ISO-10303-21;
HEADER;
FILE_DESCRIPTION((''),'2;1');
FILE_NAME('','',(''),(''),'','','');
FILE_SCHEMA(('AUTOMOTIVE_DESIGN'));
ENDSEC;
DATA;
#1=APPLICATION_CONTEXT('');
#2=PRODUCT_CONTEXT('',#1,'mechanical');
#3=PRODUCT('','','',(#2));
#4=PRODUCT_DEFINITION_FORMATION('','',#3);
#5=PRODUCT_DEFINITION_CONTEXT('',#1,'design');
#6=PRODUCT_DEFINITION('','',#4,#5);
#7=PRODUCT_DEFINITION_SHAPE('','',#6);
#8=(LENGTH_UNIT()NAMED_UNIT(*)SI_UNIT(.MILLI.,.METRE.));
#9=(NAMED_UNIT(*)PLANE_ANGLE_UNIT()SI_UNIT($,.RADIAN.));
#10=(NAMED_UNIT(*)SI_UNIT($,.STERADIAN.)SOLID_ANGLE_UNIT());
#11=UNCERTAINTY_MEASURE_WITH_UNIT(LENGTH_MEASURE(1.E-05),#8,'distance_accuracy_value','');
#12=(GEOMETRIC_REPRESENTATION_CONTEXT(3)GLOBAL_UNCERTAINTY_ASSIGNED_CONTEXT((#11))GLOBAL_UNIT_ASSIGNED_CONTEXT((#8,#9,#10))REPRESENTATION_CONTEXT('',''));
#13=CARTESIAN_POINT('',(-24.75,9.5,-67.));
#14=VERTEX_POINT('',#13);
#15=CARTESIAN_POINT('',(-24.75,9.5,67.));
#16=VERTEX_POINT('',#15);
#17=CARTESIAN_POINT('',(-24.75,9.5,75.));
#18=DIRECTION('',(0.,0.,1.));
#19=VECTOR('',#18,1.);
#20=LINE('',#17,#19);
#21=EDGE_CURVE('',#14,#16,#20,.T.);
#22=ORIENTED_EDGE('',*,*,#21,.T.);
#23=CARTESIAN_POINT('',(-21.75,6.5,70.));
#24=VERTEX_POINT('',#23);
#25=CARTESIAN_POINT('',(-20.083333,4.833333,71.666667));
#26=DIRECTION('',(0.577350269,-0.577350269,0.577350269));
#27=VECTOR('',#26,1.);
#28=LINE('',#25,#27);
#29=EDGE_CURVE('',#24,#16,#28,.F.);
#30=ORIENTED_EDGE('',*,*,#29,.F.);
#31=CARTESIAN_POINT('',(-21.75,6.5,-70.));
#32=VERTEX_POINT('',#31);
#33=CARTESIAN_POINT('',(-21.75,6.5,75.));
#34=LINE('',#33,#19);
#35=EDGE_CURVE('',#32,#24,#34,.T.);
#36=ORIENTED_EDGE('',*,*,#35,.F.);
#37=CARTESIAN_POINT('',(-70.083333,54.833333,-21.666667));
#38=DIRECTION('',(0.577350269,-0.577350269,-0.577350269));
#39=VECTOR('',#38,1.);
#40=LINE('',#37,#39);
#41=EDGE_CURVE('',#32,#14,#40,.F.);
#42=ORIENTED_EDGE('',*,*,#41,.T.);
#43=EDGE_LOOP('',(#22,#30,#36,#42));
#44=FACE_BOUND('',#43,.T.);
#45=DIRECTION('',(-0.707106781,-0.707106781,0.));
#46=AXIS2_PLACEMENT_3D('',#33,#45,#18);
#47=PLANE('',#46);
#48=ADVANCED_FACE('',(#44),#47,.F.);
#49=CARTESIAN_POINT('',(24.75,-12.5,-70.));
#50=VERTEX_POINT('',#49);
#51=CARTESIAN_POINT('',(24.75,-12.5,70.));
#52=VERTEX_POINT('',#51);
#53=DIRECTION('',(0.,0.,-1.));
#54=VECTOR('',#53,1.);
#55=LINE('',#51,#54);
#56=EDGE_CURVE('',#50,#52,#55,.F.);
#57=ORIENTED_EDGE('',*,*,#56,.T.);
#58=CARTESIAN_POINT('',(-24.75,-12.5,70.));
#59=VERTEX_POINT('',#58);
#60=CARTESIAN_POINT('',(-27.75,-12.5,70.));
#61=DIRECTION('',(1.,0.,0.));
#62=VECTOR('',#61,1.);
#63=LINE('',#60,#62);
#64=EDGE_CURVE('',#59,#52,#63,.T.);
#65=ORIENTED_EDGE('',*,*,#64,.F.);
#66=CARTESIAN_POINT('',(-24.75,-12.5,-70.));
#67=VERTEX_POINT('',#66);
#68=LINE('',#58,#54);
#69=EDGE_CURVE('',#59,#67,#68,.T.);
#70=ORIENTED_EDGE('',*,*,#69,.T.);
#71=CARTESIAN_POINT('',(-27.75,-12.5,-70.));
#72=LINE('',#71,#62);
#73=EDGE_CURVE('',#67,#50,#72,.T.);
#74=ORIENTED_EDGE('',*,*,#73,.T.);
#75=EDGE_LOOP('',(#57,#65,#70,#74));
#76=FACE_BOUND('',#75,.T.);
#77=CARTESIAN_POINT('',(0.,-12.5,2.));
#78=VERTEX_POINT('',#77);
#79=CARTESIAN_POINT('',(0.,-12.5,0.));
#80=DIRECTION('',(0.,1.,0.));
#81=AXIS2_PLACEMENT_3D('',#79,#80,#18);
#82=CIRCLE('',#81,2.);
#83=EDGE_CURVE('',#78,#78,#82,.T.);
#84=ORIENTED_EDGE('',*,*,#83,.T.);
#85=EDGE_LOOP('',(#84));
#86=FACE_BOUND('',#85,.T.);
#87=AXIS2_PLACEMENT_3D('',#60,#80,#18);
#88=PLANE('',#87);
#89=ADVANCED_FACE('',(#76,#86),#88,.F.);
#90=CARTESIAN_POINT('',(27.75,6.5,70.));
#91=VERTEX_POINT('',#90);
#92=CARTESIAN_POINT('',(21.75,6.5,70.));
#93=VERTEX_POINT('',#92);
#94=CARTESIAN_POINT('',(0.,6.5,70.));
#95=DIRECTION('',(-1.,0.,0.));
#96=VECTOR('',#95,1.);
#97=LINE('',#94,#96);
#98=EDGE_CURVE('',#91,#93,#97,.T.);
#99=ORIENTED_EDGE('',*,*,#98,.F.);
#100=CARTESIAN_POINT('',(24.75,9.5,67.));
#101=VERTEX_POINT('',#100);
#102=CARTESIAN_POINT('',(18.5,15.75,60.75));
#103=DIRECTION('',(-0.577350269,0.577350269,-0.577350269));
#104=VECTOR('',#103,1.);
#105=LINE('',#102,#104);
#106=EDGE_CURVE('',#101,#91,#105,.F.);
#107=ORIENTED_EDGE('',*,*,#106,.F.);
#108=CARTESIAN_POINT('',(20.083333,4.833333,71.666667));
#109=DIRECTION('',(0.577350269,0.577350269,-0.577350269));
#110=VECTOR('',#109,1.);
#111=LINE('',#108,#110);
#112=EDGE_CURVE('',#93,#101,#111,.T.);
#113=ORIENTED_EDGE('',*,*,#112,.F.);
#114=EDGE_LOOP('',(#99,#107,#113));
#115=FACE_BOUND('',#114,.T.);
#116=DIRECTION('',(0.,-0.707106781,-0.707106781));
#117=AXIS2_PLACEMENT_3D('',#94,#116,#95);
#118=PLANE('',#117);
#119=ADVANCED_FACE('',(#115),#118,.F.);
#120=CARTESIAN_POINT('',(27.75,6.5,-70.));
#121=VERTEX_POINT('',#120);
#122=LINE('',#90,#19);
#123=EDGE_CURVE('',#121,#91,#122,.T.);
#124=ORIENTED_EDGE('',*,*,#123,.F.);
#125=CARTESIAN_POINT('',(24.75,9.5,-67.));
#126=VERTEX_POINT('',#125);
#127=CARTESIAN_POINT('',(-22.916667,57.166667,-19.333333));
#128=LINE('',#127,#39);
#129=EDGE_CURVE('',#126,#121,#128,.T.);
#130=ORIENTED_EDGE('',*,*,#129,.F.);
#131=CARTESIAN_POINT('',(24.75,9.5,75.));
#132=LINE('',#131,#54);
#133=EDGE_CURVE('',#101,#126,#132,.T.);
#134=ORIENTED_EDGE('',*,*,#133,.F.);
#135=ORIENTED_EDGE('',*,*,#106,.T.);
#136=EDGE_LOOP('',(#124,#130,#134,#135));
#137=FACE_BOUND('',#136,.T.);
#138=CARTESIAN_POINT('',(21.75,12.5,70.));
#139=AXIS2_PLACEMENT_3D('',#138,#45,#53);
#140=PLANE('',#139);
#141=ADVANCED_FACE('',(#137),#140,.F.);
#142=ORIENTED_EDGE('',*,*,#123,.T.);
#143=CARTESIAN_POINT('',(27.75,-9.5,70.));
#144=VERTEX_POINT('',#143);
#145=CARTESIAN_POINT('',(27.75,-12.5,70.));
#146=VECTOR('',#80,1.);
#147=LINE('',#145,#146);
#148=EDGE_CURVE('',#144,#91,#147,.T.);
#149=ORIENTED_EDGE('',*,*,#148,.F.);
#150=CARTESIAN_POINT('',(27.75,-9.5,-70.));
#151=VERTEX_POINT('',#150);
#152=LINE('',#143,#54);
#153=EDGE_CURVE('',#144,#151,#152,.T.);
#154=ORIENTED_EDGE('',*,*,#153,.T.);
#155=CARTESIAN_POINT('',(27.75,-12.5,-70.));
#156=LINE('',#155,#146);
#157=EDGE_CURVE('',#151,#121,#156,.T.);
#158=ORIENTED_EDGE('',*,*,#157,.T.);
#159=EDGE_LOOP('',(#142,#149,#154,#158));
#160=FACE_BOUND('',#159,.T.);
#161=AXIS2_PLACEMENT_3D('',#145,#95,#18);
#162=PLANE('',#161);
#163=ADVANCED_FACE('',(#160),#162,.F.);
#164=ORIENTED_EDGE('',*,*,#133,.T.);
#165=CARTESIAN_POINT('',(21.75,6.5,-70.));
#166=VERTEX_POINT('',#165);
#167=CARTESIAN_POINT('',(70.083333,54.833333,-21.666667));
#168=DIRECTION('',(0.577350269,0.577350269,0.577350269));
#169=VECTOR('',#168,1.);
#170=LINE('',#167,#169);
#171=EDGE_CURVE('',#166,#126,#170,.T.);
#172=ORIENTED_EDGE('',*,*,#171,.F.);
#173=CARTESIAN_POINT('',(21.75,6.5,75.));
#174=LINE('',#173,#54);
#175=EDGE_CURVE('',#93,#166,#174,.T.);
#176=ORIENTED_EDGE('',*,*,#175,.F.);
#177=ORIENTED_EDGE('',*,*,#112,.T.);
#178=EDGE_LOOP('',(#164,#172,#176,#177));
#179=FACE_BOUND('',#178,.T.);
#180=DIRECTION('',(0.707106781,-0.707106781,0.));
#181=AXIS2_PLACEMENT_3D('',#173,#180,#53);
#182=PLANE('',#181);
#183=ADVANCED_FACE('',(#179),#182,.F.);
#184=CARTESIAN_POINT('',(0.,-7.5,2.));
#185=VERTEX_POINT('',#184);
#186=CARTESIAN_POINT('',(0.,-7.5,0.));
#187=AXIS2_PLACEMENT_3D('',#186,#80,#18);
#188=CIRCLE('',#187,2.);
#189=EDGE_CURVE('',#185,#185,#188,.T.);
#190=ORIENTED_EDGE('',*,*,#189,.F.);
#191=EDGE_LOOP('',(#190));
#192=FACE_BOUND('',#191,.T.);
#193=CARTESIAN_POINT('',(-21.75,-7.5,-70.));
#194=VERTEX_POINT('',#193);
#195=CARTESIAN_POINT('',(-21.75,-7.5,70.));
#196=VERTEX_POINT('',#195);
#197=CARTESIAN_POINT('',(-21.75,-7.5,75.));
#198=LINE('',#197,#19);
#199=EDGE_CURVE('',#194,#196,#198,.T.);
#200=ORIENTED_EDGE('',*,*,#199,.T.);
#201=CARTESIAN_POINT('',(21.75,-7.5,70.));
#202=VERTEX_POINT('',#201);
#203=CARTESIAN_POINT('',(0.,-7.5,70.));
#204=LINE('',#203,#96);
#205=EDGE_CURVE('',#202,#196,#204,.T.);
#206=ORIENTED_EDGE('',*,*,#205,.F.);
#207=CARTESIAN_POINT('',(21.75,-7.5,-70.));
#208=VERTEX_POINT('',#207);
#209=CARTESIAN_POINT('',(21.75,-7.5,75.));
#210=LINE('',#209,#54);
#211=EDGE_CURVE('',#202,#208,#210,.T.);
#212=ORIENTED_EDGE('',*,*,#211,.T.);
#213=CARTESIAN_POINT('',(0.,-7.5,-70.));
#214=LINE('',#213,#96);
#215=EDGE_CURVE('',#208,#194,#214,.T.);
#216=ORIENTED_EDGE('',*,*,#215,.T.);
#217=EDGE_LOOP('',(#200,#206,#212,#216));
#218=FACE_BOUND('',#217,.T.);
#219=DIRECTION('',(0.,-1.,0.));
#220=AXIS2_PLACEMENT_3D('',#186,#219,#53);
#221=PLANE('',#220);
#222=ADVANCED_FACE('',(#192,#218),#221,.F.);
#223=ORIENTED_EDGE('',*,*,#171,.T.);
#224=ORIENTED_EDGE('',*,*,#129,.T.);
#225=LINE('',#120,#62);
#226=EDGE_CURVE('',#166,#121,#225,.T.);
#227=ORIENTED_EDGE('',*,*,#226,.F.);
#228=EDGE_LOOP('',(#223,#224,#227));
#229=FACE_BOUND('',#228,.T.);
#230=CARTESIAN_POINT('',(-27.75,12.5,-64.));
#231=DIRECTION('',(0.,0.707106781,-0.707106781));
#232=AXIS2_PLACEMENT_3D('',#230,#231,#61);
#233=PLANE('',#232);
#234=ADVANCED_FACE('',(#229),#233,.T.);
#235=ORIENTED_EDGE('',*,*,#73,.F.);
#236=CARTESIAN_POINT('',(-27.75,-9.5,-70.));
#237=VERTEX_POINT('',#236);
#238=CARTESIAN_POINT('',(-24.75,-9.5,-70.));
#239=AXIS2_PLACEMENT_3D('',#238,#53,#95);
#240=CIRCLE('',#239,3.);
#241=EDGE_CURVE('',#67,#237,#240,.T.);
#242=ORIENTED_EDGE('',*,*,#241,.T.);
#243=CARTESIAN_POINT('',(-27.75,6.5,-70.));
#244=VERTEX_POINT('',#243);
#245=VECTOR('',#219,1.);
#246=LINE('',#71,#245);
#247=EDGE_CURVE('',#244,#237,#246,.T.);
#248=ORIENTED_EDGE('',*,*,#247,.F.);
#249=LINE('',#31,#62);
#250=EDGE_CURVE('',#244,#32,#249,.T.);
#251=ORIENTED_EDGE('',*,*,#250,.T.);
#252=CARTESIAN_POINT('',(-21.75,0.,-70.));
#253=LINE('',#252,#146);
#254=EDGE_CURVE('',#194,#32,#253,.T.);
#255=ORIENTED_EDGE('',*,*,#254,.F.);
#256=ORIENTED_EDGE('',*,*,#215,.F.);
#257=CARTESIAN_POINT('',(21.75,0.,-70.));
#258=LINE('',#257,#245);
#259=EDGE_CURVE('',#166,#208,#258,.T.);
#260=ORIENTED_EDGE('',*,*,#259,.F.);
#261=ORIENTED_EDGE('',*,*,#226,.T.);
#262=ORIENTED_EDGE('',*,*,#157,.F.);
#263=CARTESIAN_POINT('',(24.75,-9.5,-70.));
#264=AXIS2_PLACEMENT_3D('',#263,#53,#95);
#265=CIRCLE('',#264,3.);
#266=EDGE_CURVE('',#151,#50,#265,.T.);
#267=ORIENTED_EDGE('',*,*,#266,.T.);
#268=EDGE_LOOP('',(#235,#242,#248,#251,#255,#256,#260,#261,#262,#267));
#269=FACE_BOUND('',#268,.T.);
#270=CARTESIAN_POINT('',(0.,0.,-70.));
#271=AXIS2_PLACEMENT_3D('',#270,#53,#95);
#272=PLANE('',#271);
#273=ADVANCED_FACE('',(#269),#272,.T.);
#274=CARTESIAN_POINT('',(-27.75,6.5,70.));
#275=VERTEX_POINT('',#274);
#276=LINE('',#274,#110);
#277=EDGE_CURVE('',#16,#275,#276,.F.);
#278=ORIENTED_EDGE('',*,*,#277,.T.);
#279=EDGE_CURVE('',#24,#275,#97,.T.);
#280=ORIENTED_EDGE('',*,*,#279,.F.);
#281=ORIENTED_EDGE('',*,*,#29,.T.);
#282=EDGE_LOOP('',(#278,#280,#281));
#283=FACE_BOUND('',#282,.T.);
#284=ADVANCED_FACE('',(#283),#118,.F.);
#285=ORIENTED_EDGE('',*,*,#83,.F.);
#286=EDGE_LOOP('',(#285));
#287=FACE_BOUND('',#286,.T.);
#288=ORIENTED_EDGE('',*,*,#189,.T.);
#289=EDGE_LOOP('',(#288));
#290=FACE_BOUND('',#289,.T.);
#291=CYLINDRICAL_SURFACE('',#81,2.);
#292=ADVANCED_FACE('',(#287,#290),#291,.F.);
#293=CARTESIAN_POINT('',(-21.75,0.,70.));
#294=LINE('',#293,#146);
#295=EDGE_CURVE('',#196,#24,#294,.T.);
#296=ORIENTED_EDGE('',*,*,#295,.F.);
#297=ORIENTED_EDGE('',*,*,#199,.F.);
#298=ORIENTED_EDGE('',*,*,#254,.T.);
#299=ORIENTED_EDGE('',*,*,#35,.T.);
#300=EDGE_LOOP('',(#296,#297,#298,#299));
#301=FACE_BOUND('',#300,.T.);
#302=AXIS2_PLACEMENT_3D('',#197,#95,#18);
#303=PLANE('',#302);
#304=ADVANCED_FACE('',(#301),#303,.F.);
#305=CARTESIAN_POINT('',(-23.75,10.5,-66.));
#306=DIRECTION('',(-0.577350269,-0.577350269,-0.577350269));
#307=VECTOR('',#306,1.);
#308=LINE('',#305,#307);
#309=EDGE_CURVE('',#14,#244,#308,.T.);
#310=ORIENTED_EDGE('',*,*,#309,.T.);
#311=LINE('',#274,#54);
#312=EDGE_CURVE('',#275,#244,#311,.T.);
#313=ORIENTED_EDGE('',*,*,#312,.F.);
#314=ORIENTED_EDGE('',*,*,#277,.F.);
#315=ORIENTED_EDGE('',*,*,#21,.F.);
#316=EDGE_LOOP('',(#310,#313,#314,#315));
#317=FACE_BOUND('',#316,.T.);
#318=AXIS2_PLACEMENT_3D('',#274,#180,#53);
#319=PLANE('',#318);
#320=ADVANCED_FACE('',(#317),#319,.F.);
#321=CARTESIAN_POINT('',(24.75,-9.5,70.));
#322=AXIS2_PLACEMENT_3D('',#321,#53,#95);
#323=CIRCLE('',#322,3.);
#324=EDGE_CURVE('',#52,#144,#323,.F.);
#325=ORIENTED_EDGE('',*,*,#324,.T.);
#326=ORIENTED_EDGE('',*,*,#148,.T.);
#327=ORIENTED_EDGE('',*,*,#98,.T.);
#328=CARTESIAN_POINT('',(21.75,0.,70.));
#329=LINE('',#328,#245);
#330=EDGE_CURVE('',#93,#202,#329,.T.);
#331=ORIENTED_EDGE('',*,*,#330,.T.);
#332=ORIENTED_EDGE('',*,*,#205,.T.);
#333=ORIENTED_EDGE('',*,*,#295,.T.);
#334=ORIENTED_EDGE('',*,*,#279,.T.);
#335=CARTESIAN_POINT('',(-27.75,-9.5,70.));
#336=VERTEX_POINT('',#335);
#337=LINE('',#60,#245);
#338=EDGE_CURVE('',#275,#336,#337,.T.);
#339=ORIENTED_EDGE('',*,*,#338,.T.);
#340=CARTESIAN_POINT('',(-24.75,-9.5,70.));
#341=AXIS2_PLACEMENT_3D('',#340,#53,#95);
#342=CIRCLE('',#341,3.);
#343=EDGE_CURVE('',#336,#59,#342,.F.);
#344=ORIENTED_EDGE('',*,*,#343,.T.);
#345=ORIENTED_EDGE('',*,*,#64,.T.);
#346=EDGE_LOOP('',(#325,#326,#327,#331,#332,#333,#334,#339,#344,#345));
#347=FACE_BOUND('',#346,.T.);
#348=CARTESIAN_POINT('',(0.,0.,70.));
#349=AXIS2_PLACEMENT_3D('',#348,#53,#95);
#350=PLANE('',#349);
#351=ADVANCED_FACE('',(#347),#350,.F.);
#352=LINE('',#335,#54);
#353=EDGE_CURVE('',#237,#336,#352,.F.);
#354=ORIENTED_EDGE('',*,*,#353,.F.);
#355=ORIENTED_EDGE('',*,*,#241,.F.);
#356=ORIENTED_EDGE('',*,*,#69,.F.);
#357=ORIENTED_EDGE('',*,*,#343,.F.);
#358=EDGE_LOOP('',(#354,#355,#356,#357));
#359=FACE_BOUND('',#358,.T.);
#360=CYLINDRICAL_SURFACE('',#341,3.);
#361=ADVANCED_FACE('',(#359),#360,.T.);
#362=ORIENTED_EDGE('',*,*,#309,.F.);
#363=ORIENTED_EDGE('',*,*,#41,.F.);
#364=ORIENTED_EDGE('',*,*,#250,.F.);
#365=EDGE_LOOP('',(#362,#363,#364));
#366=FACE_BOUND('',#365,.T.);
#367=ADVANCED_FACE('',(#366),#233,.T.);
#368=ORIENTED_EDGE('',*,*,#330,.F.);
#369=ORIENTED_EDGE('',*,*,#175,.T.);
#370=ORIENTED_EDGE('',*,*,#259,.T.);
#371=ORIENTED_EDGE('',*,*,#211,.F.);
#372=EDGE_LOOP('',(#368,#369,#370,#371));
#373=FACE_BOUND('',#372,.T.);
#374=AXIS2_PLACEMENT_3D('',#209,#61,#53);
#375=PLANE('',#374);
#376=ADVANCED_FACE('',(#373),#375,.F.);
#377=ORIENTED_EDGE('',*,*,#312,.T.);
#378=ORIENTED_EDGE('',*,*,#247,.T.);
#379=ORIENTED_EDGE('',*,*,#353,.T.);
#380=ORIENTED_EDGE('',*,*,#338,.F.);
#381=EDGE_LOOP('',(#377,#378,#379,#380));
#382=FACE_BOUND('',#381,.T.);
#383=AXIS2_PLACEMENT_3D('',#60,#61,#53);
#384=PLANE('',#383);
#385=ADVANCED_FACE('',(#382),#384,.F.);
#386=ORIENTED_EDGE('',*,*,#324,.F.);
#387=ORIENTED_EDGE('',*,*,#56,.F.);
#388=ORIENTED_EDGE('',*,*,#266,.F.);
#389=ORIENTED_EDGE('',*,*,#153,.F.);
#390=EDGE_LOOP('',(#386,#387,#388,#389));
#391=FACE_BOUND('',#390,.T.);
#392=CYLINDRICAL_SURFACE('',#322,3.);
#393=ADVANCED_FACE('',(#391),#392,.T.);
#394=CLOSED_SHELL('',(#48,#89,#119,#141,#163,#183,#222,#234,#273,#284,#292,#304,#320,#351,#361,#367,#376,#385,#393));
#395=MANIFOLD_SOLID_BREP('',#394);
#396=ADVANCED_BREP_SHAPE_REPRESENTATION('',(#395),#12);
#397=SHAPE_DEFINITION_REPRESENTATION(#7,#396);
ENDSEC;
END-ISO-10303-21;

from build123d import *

# Parameters (mm, degrees)
SKETCH1_W           = 55.5
SKETCH1_H           = 25
BOSS_EXTRUDE1_DEPTH = 70
SKETCH2_W           = 43.5
SKETCH2_H           = 150
CUT_EXTRUDE1_DEPTH  = 20
SKETCH3_R           = 2
CUT_EXTRUDE2_DEPTH  = 78.910605825
FILLET1_R           = 3
CHAMFER1_SIZE       = 6


with BuildPart() as part:
    # Sketch1 → Boss-Extrude1 (new, symmetric)
    with BuildSketch(Plane.XY):
        Rectangle(SKETCH1_W, SKETCH1_H)
    extrude(amount=BOSS_EXTRUDE1_DEPTH, both=True)

    # Sketch2 → Cut-Extrude1 (cut)
    with BuildSketch(Plane(origin=(0, 12.5, 0), x_dir=(1, 0, 0), z_dir=(0, 1, 0))):
        Rectangle(SKETCH2_W, SKETCH2_H)
    extrude(amount=-CUT_EXTRUDE1_DEPTH, mode=Mode.SUBTRACT)

    # Sketch3 → Cut-Extrude2 (cut, through all)
    with BuildSketch(Plane(origin=(0, -7.5, 0), x_dir=(1, 0, 0), z_dir=(0, 1, 0))):
        with Locations(Location((0, 0, 0), (0, 0, 270))):
            Circle(SKETCH3_R)
    extrude(amount=-CUT_EXTRUDE2_DEPTH, mode=Mode.SUBTRACT)

    # Fillet1
    fillet1_edges = [part.edges().sort_by_distance(p)[0] for p in [
        (27.75, -12.5, 0),
        (-27.75, -12.5, 0),
    ]]
    fillet(fillet1_edges, radius=FILLET1_R)

    # Chamfer1
    # the kernel refuses this chamfer: 6 mm, written as the material it takes off along each edge
    with BuildSketch(Plane(origin=(-6.319902072, 12.5, -70), x_dir=(0, -0.9996219169112968, -0.027495876610586778), z_dir=(-1, 0, 0)), Plane(origin=(43.180097928, 12.5, -70), x_dir=(0, -0.9996219169112968, -0.027495876610586778), z_dir=(-1, 0, 0))) as chamfer1_piece_1:
        Polygon((CHAMFER1_SIZE * 0.999621916911, CHAMFER1_SIZE * 0.0274958766106), (-CHAMFER1_SIZE * 0.0274958766106, CHAMFER1_SIZE * 0.999621916911), (0, 0), align=None)
    extrude(amount=36.860195856, mode=Mode.SUBTRACT)
    with BuildSketch(Plane(origin=(-6.319902072, 12.5, 70), x_dir=(0, -0.9996219169112968, 0.027495876610586778), z_dir=(-1, 0, 0)), Plane(origin=(43.180097928, 12.5, 70), x_dir=(0, -0.9996219169112968, 0.027495876610586778), z_dir=(-1, 0, 0))) as chamfer1_piece_2:
        Polygon((CHAMFER1_SIZE * 0.999621916911, -CHAMFER1_SIZE * 0.0274958766106), (-CHAMFER1_SIZE * 0.0274958766106, -CHAMFER1_SIZE * 0.999621916911), (0, 0), align=None)
    extrude(amount=36.860195856, mode=Mode.SUBTRACT)
    with BuildSketch(Plane(origin=(21.75, 12.5, 85.430097928), x_dir=(-0.027495876610586202, -0.9996219169112968, 0), z_dir=(0, 0, -1)), Plane(origin=(-27.75, 12.5, 85.430097928), x_dir=(-0.027495876610586202, -0.9996219169112968, 0), z_dir=(0, 0, -1)), Plane(origin=(27.75, 12.5, -85.430097928), x_dir=(0.027495876610586202, -0.9996219169112968, 0), z_dir=(0, 0, 1))) as chamfer1_piece_3:
        Polygon((CHAMFER1_SIZE * 0.999621916911, -CHAMFER1_SIZE * 0.0274958766106), (-CHAMFER1_SIZE * 0.0274958766106, -CHAMFER1_SIZE * 0.999621916911), (0, 0), align=None)
    extrude(amount=170.860195856, mode=Mode.SUBTRACT)
    with BuildSketch(Plane(origin=(-21.75, 12.5, -85.430097928), x_dir=(-0.9996219169112969, 0.027495876610586497, 0), z_dir=(0, 0, 1))) as chamfer1_piece_4:
        Polygon((CHAMFER1_SIZE * 0.999621916911, CHAMFER1_SIZE * 0.0274958766106), (-CHAMFER1_SIZE * 0.0274958766106, CHAMFER1_SIZE * 0.999621916911), (0, 0), align=None)
    extrude(amount=170.860195856, mode=Mode.SUBTRACT)


solid = part.part
